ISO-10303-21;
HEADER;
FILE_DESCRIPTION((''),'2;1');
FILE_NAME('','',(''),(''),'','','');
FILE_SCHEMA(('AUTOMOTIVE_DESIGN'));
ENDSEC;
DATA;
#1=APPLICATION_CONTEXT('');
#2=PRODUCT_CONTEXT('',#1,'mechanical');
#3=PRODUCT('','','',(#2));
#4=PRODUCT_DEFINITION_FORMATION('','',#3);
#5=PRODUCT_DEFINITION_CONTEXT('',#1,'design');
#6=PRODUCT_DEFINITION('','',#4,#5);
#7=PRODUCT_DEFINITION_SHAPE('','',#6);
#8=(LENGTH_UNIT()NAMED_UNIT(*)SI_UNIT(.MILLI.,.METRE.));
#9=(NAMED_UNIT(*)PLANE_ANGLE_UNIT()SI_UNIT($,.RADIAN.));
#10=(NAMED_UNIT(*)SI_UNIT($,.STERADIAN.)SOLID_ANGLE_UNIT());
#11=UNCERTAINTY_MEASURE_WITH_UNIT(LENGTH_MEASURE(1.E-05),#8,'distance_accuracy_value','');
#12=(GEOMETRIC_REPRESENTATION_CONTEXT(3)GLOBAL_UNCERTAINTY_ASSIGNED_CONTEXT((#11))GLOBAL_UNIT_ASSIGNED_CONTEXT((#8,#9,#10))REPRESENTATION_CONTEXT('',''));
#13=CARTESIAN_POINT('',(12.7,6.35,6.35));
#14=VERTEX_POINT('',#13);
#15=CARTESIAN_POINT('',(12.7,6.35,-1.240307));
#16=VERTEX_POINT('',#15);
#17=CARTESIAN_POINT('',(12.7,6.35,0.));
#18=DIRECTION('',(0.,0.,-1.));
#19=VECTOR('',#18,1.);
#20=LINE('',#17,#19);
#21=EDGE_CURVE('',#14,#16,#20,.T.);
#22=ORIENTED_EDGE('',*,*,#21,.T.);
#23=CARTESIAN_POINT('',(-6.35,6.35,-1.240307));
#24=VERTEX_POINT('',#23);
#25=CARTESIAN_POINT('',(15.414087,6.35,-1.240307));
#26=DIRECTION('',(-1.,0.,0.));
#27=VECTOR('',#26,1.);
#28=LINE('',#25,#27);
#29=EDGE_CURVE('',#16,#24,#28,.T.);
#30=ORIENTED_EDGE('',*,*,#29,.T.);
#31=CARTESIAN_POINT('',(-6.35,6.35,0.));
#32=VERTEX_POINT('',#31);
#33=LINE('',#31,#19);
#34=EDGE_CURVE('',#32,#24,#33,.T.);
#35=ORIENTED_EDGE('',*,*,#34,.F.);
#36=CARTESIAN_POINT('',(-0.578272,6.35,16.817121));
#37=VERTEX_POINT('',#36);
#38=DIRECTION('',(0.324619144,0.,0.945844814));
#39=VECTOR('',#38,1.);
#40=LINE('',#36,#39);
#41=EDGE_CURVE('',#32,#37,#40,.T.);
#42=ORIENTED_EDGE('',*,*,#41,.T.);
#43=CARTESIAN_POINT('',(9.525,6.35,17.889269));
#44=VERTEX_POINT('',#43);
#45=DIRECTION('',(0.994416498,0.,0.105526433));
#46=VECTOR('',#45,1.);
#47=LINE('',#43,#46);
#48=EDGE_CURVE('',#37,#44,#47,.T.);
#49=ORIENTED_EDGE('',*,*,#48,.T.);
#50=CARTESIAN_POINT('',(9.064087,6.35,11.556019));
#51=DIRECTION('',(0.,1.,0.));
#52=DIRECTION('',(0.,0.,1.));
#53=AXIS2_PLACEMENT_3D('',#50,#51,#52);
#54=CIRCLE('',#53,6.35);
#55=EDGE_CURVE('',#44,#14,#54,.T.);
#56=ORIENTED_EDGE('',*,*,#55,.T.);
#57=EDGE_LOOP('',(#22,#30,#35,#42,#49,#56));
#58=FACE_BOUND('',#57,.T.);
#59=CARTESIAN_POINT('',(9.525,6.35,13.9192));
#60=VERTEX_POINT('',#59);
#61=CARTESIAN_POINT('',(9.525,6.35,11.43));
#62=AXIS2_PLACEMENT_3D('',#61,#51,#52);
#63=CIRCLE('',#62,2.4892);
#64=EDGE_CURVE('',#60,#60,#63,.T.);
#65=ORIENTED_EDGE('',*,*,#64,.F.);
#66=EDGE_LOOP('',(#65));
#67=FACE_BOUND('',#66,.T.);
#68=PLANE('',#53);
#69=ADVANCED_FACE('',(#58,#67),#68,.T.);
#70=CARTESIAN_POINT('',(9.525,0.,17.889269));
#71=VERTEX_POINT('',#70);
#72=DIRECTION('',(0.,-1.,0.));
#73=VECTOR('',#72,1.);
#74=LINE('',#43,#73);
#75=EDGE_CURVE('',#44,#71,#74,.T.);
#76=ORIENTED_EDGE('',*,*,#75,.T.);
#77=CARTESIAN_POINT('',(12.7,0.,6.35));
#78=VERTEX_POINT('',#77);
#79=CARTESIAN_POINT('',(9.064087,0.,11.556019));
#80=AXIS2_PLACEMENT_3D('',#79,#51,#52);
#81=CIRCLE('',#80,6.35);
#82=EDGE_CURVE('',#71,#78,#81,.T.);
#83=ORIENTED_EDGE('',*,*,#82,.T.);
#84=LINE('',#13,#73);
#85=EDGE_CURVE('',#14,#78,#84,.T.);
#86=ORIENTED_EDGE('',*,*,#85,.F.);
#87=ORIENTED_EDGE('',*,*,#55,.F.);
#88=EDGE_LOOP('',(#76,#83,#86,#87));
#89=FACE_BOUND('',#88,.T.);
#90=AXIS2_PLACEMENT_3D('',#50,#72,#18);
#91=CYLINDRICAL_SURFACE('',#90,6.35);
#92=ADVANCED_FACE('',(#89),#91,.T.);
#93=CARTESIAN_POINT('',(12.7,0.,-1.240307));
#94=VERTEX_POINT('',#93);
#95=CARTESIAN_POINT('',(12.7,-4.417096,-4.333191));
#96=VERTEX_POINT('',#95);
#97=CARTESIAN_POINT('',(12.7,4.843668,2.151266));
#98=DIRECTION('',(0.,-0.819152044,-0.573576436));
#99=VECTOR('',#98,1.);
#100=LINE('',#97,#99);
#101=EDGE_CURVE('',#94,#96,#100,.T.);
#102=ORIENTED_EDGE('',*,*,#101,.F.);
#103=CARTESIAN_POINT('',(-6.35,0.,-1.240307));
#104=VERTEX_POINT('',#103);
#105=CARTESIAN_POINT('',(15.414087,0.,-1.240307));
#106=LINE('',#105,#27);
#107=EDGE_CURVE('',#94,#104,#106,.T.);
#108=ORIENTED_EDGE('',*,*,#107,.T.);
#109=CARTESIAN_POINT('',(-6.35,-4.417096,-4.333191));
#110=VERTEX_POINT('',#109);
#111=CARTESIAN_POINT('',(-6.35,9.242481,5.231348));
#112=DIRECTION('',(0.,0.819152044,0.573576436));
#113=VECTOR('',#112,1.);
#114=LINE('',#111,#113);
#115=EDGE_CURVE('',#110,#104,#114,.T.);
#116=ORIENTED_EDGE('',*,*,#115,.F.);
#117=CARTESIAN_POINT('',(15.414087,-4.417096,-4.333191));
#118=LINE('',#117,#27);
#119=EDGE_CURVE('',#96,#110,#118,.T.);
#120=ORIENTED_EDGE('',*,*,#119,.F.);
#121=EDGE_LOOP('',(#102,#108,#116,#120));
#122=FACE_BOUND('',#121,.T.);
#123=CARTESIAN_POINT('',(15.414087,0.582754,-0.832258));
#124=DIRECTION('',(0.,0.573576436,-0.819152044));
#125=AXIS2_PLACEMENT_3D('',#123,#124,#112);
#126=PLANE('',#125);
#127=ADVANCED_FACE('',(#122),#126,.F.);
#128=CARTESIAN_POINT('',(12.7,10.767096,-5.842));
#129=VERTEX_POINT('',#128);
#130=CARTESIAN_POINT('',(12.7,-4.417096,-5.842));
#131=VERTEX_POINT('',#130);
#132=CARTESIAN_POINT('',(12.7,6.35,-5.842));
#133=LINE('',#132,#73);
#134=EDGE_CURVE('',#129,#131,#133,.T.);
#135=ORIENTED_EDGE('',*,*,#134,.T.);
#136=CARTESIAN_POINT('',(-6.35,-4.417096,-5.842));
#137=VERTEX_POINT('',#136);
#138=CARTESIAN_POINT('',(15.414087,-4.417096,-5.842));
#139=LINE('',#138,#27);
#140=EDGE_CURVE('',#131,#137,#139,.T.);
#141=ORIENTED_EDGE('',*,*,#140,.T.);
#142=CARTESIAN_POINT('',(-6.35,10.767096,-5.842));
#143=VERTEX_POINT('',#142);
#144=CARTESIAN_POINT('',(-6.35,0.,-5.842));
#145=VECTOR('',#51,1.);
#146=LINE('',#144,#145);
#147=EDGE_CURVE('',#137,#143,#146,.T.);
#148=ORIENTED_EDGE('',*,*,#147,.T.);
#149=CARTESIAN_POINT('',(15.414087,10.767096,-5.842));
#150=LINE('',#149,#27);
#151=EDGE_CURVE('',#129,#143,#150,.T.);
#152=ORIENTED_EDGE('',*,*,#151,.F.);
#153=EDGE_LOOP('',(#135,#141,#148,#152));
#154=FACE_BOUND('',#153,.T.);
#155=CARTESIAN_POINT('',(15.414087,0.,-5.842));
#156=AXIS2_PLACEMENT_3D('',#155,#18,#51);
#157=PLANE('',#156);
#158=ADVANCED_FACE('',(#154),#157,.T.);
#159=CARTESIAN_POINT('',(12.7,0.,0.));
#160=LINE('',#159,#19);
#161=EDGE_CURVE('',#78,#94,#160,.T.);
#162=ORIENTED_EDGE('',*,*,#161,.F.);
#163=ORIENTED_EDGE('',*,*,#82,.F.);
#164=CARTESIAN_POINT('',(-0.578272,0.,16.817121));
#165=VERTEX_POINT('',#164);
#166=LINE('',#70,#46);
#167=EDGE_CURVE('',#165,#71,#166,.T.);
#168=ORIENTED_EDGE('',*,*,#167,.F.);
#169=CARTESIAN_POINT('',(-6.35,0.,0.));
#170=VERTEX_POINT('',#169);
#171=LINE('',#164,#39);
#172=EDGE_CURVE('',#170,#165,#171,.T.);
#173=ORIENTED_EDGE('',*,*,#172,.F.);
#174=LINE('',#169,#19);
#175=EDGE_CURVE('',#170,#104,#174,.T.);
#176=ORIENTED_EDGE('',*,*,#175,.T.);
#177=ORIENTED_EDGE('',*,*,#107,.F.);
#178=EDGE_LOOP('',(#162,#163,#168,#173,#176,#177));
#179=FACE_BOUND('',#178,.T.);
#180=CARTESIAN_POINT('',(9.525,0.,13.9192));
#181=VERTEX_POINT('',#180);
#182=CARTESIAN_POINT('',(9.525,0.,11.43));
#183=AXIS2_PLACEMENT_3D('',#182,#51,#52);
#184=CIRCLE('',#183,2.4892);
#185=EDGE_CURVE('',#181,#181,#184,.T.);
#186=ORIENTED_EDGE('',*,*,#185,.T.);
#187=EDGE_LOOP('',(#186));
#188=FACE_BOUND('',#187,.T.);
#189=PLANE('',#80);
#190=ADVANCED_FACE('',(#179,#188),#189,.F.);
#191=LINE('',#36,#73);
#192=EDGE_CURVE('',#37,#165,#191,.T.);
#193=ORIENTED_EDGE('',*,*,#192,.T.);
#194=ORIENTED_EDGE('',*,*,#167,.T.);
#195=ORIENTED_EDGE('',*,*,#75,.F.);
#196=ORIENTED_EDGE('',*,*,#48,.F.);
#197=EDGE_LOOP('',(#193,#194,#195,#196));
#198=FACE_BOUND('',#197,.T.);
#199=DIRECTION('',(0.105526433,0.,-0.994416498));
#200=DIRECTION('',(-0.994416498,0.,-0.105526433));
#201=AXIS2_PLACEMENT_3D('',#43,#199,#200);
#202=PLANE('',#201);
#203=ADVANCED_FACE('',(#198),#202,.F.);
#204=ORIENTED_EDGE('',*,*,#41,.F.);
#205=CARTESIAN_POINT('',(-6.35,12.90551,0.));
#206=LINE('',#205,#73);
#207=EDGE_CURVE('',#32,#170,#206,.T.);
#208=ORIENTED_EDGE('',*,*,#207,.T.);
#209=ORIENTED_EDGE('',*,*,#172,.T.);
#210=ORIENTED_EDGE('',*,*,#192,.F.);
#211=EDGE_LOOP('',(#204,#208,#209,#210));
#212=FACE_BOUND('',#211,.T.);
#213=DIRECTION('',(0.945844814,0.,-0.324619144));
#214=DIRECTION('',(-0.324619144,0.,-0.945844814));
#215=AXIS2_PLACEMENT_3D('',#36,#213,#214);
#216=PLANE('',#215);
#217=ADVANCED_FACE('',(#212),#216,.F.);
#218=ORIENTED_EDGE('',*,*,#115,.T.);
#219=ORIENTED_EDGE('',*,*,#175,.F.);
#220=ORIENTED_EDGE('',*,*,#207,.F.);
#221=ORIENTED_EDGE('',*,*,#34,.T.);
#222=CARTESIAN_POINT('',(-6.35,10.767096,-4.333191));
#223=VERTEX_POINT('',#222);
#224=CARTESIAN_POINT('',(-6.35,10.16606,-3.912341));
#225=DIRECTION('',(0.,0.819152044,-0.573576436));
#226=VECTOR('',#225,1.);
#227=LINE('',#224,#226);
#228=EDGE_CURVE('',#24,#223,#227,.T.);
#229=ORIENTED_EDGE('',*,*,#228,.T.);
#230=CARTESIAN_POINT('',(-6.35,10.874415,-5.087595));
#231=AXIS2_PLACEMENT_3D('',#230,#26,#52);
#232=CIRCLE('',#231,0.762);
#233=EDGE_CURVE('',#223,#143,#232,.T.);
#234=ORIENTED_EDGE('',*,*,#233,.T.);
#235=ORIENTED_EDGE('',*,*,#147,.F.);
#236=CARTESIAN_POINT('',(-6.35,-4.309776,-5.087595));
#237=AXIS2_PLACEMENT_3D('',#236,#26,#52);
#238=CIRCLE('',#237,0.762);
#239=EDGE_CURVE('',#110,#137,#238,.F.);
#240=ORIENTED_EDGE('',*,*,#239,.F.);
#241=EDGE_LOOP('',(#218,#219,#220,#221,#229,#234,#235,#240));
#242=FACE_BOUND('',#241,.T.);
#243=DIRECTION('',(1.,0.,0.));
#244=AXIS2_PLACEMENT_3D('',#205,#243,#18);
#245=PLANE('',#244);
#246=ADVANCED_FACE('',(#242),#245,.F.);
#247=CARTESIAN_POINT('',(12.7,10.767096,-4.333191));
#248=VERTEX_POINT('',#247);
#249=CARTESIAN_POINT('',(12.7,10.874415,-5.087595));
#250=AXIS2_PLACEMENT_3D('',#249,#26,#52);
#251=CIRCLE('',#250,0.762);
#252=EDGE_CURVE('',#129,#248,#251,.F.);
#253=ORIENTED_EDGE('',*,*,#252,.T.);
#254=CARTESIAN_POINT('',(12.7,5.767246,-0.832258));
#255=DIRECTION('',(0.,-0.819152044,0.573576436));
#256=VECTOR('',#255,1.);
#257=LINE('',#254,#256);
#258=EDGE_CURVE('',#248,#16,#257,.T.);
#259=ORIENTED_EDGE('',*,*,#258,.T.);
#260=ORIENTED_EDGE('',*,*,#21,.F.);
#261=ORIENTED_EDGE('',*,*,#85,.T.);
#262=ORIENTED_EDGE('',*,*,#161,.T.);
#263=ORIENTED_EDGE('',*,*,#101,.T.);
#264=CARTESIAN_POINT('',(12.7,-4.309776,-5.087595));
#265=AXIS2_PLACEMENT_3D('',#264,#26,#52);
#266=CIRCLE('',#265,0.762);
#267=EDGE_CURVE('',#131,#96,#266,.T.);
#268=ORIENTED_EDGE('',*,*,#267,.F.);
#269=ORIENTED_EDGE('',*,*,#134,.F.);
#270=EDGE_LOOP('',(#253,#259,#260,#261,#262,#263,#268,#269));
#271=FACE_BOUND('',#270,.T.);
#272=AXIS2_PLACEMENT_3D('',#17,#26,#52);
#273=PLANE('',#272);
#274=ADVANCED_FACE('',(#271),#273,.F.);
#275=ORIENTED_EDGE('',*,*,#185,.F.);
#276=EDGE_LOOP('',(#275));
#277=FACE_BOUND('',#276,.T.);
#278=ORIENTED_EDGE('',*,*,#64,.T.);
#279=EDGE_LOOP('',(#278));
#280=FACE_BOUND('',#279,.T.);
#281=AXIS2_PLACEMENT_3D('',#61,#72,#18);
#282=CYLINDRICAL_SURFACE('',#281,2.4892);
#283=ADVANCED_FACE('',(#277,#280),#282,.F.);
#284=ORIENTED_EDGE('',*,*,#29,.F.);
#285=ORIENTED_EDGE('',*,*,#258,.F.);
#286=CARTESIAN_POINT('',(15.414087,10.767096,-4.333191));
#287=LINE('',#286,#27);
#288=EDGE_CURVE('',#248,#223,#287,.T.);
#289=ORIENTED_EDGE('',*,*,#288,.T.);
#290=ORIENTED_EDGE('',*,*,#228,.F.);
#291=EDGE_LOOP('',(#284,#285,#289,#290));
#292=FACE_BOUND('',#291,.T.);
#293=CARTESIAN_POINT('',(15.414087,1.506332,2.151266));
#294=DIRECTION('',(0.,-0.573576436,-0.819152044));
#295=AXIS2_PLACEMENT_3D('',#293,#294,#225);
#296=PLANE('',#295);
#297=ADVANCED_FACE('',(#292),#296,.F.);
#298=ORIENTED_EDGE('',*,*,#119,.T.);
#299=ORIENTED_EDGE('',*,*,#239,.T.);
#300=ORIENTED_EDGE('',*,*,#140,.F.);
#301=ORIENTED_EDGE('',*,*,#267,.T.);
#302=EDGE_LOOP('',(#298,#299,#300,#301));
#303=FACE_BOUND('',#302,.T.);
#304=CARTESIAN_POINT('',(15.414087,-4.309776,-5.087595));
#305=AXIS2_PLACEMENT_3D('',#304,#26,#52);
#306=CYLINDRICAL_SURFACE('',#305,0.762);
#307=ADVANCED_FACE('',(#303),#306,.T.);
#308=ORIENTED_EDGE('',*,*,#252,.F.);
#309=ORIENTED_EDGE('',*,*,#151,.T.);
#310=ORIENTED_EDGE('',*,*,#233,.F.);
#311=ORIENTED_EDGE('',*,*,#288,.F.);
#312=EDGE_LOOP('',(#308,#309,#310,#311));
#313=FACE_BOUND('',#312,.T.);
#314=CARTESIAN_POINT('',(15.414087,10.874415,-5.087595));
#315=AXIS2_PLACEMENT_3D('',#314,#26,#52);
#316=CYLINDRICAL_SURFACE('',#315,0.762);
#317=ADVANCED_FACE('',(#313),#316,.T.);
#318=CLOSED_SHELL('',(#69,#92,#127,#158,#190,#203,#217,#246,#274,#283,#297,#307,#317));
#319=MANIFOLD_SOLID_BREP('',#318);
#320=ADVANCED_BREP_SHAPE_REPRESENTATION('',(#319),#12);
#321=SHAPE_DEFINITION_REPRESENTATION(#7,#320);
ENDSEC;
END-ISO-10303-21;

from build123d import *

# Parameters (mm, degrees)
SKETCH1_R               = 2.4892
BOSS_EXTRUDE1_DEPTH     = 6.35
BOSS_EXTRUDE2_START     = -6.35
BOSS_EXTRUDE2_DEPTH     = 19.05
BOSS_EXTRUDE2_START_2   = -6.555460136
BOSS_EXTRUDE2_2_DEPTH   = 19.460920272
BOSS_EXTRUDE2_START_3   = -10
BOSS_EXTRUDE2_3_DEPTH   = 3.65
CUT_EXTRUDE1_DEPTH      = 27.910448217
CUT_EXTRUDE1_DEPTH_BACK = 27.910448217
SKETCH3_W               = 2.179354936
SKETCH3_H               = 6.35
CUT_EXTRUDE2_DEPTH      = 31.98795935
CUT_EXTRUDE2_DEPTH_BACK = 31.98795935


with BuildPart() as part:
    # Sketch1 → Boss-Extrude1 (new body)
    with BuildSketch(Plane(origin=(0, 0, 0), x_dir=(1, 0, 0), z_dir=(0, 1, 0))):
        with BuildLine():
            Line((9.525, -17.889269346), (-0.578271622, -16.817120786))
            Line((-0.578271622, -16.817120786), (-6.35, 0))
            Line((-6.35, 0), (12.7, 0))
            Line((12.7, 0), (12.7, -6.35))
            ThreePointArc((12.7, -6.35), (15.186560179, -13.240601753), (9.525, -17.889269346))
        make_face()
        with Locations(Location((9.525, -11.43, 0), (0, 0, 270))):
            Circle(SKETCH1_R, mode=Mode.SUBTRACT)
    extrude(amount=BOSS_EXTRUDE1_DEPTH)

    # Boss-Extrude2: read off the stored shape, not the designer's step
    # Boss-Extrude2 outline → Boss-Extrude2 (add)
    with BuildSketch(Plane.YZ.offset(BOSS_EXTRUDE2_START)):
        with BuildLine():
            ThreePointArc((11.551615481, -6.35), (12.905510296, -4.996105185), (11.551615481, -3.642210371))
            Line((11.551615481, -3.642210371), (6.35, 0))
            Line((6.35, 0), (0, 0))
            Line((0, 0), (-5.201615481, -3.642210371))
            ThreePointArc((-5.201615481, -3.642210371), (-6.555510296, -4.996105185), (-5.201615481, -6.35))
            Line((-5.201615481, -6.35), (11.551615481, -6.35))
        make_face()
    extrude(amount=BOSS_EXTRUDE2_DEPTH)

    # Boss-Extrude2 2 outline → Boss-Extrude2 2 (add)
    with BuildSketch(Plane(origin=(0, 0, 0), x_dir=(1, 0, 0), z_dir=(0, 1, 0)).offset(BOSS_EXTRUDE2_START_2)):
        Polygon((-8.529354936, 6.35), (-6.35, 0), (-6.35, 6.35), align=None)
    extrude(amount=BOSS_EXTRUDE2_2_DEPTH)

    # Boss-Extrude2 3 outline → Boss-Extrude2 3 (cut)
    with BuildSketch(Plane.YZ.offset(BOSS_EXTRUDE2_START_3)):
        with BuildLine():
            Line((12.905460136, 0), (6.35, 0))
            Line((6.35, 0), (11.551615481, -3.642210371))
            ThreePointArc((11.551615481, -3.642210371), (12.504834401, -4.034645431), (12.905460136, -4.984450993))
            Line((12.905460136, -4.984450993), (12.905460136, 0))
        make_face()
        with BuildLine():
            ThreePointArc((12.905460136, -5.007759378), (12.504834401, -5.95756494), (11.551615481, -6.35))
            Line((11.551615481, -6.35), (12.905460136, -6.35))
            Line((12.905460136, -6.35), (12.905460136, -5.007759378))
        make_face()
        with BuildLine():
            Line((0, 0), (-6.555460136, 0))
            Line((-6.555460136, 0), (-6.555460136, -4.984450993))
            ThreePointArc((-6.555460136, -4.984450993), (-6.154834401, -4.034645431), (-5.201615481, -3.642210371))
            Line((-5.201615481, -3.642210371), (0, 0))
        make_face()
        with BuildLine():
            ThreePointArc((-5.201615481, -6.35), (-6.154834401, -5.95756494), (-6.555460136, -5.007759378))
            Line((-6.555460136, -5.007759378), (-6.555460136, -6.35))
            Line((-6.555460136, -6.35), (-5.201615481, -6.35))
        make_face()
    extrude(amount=BOSS_EXTRUDE2_3_DEPTH, mode=Mode.SUBTRACT)

    # Sketch3 → Cut-Extrude1 (cut, two sides: drawn at the far end of the back side and taken through both)
    with BuildSketch(Plane.XZ.offset(-CUT_EXTRUDE1_DEPTH_BACK)):
        with Locations((-7.439677468, -3.175)):
            Rectangle(SKETCH3_W, SKETCH3_H)
    extrude(amount=CUT_EXTRUDE1_DEPTH + CUT_EXTRUDE1_DEPTH_BACK, mode=Mode.SUBTRACT)

    # Sketch4 → Cut-Extrude2 (cut, two sides: drawn at the far end of the back side and taken through both)
    with BuildSketch(Plane.ZY.offset(6.35).offset(-CUT_EXTRUDE2_DEPTH_BACK)):
        with BuildLine():
            ThreePointArc((-5.842, -4.417095512), (-5.087595278, -5.071775822), (-4.333190556, -4.417095512))
            Line((-4.333190556, -4.417095512), (-1.240306982, 0))
            Line((-1.240306982, 0), (0, 0))
            Line((0, 0), (-3.642210371, -5.201615481))
            ThreePointArc((-3.642210371, -5.201615481), (-4.996105185, -6.555510296), (-6.35, -5.201615481))
            Line((-6.35, -5.201615481), (-6.35, 11.551615481))
            ThreePointArc((-6.35, 11.551615481), (-4.996105185, 12.905510296), (-3.642210371, 11.551615481))
            Line((-3.642210371, 11.551615481), (0, 6.35))
            Line((0, 6.35), (-1.240306982, 6.35))
            Line((-1.240306982, 6.35), (-4.333190556, 10.767095512))
            ThreePointArc((-4.333190556, 10.767095512), (-5.087595278, 11.636415201), (-5.842, 10.767095512))
            Line((-5.842, 10.767095512), (-5.842, -4.417095512))
        make_face()
    extrude(amount=CUT_EXTRUDE2_DEPTH + CUT_EXTRUDE2_DEPTH_BACK, mode=Mode.SUBTRACT)


solid = part.part
